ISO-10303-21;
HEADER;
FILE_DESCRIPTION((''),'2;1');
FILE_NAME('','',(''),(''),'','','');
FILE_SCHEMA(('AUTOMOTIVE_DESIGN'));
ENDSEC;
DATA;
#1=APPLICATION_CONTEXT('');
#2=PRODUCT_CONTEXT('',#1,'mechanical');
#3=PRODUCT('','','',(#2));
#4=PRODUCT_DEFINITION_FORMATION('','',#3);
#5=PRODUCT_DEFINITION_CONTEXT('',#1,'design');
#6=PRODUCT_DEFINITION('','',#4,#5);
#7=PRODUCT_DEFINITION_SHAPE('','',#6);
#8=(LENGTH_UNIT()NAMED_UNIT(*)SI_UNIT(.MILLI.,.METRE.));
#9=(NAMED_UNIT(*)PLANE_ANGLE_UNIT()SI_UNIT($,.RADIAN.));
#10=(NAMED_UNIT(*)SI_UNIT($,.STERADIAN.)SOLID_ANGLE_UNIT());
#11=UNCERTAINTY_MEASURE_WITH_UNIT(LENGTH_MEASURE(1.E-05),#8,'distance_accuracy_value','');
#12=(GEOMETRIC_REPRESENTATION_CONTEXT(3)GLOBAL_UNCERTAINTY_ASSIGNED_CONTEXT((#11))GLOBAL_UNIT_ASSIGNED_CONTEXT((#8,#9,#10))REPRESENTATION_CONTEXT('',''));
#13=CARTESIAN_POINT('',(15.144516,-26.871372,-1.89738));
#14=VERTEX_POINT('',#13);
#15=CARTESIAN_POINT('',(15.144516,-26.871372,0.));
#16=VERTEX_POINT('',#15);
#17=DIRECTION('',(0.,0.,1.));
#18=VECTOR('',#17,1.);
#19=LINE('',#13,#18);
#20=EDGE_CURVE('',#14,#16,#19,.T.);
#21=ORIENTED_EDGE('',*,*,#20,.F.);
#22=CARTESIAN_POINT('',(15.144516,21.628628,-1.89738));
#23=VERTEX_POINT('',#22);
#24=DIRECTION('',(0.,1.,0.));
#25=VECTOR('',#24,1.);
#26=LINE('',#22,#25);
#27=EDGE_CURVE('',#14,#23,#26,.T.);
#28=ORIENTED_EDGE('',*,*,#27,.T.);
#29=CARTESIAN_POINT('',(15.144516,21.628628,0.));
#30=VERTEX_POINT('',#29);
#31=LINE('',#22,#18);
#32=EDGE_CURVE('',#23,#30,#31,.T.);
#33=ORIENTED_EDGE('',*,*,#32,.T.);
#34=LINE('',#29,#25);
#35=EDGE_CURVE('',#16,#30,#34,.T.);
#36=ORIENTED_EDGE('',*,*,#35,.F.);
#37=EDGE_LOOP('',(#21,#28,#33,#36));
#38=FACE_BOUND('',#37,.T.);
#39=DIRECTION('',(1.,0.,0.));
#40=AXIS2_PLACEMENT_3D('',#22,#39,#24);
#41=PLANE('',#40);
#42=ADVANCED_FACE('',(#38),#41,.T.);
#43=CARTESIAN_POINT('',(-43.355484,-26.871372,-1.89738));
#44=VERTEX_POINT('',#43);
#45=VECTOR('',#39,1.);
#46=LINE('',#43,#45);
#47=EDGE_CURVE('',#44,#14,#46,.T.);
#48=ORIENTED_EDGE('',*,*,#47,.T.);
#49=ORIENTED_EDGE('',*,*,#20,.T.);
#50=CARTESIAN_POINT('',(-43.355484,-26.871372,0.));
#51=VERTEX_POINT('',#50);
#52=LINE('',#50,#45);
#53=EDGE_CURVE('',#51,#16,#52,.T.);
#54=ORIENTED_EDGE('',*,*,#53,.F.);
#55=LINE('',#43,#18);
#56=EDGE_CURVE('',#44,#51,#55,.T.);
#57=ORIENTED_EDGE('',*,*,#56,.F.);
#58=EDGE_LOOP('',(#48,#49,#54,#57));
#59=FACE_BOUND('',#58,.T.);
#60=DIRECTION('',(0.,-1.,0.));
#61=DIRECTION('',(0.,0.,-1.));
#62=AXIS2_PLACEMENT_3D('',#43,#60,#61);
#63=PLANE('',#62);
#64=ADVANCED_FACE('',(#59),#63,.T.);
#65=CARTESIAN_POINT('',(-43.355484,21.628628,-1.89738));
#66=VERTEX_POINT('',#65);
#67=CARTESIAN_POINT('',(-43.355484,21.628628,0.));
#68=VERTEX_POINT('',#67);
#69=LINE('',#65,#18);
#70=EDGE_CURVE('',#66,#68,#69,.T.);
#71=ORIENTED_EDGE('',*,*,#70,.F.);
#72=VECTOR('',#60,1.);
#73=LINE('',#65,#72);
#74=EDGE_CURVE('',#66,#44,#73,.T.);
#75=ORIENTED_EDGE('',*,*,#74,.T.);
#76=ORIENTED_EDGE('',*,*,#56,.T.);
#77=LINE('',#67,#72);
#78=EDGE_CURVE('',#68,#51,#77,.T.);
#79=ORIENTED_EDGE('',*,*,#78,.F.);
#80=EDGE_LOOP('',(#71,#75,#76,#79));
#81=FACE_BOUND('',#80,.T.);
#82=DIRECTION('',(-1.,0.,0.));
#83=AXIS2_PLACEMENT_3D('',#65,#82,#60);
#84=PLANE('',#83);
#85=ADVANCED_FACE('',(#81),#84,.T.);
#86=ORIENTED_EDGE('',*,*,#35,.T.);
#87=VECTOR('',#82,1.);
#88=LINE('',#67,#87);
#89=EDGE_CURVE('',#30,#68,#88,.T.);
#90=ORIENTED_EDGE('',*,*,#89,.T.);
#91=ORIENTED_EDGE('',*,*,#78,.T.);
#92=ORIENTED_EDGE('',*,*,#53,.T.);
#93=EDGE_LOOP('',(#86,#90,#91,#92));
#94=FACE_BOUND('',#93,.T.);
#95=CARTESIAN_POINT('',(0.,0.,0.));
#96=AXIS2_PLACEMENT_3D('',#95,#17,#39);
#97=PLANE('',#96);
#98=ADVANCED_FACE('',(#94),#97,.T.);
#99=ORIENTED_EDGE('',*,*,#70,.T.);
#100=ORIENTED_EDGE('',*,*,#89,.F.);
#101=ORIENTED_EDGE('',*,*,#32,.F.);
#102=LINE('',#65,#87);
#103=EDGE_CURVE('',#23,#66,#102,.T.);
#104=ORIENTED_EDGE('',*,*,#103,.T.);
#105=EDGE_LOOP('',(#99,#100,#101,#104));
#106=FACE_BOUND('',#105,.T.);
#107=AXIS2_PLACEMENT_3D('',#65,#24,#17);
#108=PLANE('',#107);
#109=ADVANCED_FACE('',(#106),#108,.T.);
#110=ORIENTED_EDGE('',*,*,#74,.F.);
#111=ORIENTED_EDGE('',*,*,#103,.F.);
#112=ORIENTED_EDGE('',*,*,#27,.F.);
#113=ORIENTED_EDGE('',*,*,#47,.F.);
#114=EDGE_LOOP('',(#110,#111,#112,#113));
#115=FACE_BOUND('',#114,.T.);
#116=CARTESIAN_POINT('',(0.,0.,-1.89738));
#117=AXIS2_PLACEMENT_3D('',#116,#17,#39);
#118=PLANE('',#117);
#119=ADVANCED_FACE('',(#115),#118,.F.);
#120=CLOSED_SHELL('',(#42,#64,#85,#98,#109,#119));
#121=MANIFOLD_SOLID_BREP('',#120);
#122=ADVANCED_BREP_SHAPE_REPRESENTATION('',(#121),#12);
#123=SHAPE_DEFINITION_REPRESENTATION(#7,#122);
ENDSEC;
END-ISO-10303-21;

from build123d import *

# Parameters (mm, degrees)
SKETCH1_W          = 58.5
SKETCH1_H          = 48.5
BASE_FLANGE1_DEPTH = 1.89738


# Sheet-metal steps are written as plain solids
with BuildPart() as part:
    # Sketch1 → Base-Flange1 (new body)
    with BuildSketch(Plane.XY):
        with Locations((-14.10548419, -2.621372257)):
            Rectangle(SKETCH1_W, SKETCH1_H)
    extrude(amount=-BASE_FLANGE1_DEPTH)


solid = part.part
